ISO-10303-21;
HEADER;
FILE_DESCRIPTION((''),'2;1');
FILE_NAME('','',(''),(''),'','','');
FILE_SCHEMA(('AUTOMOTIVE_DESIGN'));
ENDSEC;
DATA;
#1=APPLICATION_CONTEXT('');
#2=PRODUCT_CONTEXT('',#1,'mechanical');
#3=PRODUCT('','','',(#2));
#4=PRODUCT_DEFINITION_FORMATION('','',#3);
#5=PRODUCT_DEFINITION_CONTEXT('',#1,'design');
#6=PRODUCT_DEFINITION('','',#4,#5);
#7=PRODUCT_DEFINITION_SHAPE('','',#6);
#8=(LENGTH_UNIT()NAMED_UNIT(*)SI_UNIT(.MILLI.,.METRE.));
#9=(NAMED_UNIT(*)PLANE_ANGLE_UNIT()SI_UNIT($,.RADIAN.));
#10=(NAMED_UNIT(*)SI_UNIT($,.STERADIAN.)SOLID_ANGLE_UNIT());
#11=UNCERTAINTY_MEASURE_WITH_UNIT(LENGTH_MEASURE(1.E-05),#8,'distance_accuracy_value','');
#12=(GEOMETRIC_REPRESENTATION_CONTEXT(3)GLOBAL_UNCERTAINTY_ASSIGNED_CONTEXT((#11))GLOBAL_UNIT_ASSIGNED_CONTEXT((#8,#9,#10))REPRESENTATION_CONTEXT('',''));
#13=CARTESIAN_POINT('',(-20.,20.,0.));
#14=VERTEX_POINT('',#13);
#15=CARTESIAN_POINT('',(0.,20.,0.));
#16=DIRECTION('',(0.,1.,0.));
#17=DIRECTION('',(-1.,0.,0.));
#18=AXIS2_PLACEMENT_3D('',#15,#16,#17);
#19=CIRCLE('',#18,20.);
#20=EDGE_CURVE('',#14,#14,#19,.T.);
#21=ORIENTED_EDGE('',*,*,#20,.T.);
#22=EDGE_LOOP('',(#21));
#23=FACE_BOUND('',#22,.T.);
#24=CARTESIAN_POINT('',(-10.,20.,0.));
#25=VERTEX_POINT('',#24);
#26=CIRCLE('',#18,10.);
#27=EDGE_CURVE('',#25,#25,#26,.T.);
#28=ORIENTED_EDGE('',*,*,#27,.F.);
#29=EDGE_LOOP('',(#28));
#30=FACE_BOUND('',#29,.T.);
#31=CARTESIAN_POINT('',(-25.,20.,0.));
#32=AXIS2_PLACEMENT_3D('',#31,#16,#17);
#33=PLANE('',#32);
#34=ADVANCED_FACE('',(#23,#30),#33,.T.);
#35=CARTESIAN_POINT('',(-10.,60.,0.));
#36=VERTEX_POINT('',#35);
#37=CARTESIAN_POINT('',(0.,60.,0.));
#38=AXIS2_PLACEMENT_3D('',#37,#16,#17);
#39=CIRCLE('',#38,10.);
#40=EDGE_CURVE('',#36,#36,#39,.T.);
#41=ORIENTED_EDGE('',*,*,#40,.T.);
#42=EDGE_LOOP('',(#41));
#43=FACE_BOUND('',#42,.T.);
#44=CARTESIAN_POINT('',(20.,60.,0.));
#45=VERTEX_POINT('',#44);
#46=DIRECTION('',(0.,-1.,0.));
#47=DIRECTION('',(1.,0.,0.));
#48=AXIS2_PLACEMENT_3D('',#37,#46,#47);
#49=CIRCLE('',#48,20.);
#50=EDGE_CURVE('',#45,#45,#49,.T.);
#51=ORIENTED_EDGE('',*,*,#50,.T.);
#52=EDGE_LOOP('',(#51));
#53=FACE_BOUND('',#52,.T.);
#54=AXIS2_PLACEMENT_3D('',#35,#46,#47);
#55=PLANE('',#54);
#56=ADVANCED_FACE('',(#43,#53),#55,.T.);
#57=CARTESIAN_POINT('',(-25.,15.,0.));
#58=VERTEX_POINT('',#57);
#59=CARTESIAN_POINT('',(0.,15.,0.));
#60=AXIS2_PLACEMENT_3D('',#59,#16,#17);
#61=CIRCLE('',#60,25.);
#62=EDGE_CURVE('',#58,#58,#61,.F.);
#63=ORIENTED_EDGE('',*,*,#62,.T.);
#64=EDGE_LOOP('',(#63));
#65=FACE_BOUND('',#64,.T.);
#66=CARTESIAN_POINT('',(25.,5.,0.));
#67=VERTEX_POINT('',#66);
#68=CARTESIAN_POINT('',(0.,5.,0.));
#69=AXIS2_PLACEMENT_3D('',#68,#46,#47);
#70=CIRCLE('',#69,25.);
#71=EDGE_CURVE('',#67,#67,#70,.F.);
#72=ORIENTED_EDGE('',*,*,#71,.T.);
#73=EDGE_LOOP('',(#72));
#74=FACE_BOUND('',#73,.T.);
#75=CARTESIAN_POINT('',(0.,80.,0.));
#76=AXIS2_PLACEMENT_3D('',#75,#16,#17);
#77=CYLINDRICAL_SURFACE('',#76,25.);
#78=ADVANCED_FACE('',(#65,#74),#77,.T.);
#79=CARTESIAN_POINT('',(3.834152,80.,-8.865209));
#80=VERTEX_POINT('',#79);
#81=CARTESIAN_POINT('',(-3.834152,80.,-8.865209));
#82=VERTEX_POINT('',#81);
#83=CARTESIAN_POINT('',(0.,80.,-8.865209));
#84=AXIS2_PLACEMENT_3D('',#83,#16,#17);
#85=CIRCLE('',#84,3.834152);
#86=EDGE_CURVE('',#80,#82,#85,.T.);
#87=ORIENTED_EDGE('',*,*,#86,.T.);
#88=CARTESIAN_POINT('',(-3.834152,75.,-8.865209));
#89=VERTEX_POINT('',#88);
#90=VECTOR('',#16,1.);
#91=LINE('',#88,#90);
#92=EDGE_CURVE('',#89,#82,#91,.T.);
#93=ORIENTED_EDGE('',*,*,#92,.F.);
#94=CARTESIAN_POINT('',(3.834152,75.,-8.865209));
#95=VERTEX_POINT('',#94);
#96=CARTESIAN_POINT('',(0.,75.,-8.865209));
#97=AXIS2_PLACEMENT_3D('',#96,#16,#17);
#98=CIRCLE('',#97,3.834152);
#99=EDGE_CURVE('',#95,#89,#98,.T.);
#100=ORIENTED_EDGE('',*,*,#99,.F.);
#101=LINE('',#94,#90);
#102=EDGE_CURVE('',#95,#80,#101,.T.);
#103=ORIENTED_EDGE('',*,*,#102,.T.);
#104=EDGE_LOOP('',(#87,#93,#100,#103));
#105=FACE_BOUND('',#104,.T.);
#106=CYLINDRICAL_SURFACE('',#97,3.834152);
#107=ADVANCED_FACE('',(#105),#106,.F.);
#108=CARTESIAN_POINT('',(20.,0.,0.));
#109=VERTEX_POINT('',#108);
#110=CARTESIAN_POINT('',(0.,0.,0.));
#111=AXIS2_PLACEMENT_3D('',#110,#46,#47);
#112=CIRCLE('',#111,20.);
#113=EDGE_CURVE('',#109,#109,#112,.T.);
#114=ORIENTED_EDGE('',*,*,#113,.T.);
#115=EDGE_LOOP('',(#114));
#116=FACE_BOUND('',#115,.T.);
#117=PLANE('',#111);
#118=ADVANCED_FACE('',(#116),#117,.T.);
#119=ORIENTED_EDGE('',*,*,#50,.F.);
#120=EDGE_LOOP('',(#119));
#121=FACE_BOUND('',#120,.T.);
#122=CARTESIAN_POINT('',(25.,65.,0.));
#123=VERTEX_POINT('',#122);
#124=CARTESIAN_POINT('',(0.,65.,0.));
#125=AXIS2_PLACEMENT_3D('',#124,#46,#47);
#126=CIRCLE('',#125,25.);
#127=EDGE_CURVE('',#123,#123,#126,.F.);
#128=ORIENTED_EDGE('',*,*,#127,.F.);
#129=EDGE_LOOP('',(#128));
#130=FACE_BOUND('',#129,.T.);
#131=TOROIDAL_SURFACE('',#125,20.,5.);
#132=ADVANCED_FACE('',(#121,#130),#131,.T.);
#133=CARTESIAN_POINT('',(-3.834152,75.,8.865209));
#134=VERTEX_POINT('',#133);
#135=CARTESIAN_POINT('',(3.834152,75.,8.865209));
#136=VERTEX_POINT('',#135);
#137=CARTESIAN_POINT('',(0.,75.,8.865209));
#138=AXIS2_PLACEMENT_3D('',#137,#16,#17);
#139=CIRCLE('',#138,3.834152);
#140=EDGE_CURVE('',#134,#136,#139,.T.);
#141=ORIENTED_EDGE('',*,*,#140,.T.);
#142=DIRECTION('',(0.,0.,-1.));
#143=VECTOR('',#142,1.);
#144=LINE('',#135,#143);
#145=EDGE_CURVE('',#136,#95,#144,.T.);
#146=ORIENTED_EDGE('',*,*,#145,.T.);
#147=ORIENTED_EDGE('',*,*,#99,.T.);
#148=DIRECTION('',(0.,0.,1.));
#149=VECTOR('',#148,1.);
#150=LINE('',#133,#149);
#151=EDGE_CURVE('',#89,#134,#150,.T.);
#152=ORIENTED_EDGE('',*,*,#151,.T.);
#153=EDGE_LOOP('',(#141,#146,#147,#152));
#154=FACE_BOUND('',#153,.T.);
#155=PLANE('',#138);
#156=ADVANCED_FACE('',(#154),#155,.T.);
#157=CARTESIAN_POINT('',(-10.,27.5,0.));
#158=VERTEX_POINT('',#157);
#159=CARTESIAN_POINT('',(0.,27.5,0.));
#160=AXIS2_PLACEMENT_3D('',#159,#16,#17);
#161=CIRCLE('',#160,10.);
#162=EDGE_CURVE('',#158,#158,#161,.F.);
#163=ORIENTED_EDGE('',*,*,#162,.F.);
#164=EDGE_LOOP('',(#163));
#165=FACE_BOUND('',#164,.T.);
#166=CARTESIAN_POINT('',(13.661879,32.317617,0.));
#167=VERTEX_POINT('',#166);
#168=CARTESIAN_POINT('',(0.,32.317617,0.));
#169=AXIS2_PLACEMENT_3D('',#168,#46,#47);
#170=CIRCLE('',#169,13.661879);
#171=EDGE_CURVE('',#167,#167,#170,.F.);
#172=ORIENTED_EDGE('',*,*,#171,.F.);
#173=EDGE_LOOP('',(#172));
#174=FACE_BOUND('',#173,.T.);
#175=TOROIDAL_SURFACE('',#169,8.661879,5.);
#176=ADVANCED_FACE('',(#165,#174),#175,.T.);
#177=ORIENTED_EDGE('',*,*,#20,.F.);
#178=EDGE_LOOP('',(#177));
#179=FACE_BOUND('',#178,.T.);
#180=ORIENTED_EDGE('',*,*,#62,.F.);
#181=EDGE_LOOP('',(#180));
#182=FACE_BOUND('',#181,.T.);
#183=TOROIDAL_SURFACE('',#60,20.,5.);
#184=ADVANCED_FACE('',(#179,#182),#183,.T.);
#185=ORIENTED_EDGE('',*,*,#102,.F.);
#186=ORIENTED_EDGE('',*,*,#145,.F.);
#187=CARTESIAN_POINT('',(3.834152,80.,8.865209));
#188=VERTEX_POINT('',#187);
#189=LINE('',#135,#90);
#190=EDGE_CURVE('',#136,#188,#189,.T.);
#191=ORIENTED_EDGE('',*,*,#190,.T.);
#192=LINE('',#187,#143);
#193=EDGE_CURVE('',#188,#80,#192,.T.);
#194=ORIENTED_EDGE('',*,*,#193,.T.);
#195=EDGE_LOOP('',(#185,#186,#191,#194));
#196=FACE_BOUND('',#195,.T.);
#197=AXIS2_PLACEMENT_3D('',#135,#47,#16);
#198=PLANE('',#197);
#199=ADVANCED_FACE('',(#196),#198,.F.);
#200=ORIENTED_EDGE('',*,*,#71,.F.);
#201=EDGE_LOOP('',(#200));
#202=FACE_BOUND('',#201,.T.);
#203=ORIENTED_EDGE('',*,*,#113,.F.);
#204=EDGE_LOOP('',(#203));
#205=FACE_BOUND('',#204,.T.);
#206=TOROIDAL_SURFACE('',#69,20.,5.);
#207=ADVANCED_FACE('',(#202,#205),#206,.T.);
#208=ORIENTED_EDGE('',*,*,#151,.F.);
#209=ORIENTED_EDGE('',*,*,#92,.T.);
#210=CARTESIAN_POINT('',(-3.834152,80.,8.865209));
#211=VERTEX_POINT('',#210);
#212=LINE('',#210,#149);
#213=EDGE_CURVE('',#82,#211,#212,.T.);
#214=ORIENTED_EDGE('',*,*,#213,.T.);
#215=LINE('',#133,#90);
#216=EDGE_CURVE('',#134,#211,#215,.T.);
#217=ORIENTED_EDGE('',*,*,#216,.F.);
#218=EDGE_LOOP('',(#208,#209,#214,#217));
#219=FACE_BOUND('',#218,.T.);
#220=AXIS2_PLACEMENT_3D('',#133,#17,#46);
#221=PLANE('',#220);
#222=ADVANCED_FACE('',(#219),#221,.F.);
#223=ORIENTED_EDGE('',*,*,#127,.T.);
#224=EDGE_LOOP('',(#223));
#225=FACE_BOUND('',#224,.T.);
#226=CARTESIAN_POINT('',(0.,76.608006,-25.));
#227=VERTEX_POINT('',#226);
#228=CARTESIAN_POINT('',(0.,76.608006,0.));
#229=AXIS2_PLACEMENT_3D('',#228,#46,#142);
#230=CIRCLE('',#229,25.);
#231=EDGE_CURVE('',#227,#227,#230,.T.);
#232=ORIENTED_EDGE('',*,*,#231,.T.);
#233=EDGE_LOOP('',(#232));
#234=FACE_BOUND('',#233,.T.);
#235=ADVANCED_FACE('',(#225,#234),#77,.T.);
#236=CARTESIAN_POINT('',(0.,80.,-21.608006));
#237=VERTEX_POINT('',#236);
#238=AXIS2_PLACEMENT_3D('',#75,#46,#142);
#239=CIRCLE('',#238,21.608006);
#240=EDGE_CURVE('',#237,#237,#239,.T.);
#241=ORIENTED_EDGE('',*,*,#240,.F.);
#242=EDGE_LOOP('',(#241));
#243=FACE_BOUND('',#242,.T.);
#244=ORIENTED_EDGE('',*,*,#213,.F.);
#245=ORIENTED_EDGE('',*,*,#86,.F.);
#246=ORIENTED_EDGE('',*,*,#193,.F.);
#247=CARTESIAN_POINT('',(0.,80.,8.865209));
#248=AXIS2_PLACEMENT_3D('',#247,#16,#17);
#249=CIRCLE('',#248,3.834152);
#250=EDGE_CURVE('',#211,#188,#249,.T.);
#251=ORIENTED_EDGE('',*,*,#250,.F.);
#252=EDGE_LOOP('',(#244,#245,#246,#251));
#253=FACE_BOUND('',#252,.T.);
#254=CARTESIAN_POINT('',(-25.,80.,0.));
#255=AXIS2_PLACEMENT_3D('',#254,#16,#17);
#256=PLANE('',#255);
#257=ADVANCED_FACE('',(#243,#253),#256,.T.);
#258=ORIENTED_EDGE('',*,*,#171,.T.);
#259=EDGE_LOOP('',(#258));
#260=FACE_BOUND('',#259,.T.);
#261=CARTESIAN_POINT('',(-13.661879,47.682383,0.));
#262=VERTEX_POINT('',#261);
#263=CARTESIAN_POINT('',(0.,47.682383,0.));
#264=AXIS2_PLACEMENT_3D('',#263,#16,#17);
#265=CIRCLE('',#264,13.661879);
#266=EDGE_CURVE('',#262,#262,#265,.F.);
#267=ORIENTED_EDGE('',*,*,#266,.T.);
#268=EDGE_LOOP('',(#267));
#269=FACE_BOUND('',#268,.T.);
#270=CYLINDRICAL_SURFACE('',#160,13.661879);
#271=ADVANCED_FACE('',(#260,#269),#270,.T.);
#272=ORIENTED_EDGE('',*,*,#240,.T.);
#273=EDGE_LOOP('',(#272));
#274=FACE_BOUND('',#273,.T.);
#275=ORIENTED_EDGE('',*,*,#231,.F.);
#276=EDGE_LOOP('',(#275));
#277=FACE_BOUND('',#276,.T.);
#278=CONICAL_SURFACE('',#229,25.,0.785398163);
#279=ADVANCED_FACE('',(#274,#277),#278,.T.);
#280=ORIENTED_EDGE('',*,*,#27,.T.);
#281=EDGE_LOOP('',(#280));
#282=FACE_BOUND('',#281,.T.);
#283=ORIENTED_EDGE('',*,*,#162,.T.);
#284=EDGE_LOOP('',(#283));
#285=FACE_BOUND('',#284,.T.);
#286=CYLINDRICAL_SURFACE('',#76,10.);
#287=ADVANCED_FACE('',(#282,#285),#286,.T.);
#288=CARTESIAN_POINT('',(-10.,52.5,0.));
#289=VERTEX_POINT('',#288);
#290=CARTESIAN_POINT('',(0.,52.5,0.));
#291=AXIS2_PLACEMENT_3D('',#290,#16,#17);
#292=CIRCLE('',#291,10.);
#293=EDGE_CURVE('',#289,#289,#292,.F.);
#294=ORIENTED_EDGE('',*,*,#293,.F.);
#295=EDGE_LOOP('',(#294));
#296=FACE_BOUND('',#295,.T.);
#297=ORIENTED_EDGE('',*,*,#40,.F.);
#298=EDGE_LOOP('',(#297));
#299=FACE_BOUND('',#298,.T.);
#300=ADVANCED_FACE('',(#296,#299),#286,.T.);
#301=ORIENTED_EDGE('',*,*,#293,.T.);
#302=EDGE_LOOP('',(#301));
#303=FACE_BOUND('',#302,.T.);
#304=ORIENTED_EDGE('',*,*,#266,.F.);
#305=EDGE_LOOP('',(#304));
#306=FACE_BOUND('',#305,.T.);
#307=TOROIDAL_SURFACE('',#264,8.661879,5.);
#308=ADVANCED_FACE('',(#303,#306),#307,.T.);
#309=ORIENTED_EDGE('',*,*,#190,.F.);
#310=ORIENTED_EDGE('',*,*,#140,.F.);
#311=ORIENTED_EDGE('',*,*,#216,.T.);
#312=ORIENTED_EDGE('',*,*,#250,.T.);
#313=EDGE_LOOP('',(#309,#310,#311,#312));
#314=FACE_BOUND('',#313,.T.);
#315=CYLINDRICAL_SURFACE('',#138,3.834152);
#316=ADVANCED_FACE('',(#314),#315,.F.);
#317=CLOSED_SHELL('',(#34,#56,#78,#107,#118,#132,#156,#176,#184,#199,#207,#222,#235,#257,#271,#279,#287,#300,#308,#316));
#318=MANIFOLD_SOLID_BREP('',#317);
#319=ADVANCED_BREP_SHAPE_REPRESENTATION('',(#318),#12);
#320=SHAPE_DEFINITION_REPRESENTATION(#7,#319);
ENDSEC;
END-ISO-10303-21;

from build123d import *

# Parameters (mm, degrees)
SKETCH_3_R          = 13.661879352
EXTRUDE_1_DEPTH     = 12.5
CUT_EXTRUDE_1_DEPTH = 5
FILLET_1_R          = 5


with BuildPart() as part:
    # 草图2 → 旋转1 (revolve)
    with BuildSketch(Plane.XY):
        Polygon((0, 0), (-25, 0), (-25, 20), (-10, 20), (-10, 60), (-25, 60), (-25, 80), (0, 80), align=None)
    revolve(axis=Axis((0, 80, 0), (0, -1, 0)))

    # 草图3 → 凸台-拉伸1 (add, symmetric)
    with BuildSketch(Plane(origin=(0, 40, 0), x_dir=(1, 0, 0), z_dir=(0, 1, 0))):
        with Locations(Location((0, 0, 0), (0, 0, 180))):
            Circle(SKETCH_3_R)
    extrude(amount=EXTRUDE_1_DEPTH, both=True)

    # 草图4 → 切除-拉伸1 (cut)
    with BuildSketch(Plane(origin=(0, 80, 0), x_dir=(1, 0, 0), z_dir=(0, 1, 0))):
        with BuildLine():
            Line((-3.834152171, -8.865208988), (-3.834152171, 8.865208988))
            ThreePointArc((-3.834152171, 8.865208988), (0, 12.699361159), (3.834152171, 8.865208988))
            Line((3.834152171, 8.865208988), (3.834152171, -8.865208988))
            ThreePointArc((3.834152171, -8.865208988), (0, -12.699361159), (-3.834152171, -8.865208988))
        make_face()
    extrude(amount=-CUT_EXTRUDE_1_DEPTH, mode=Mode.SUBTRACT)

    # 草图5 → 切除-旋转1 (revolve, cut)
    with BuildSketch(Plane(origin=(0, 0, 0), x_dir=(0, 0, -1), z_dir=(1, 0, 0)), mode=Mode.PRIVATE) as cut_revolve_1_sk:
        Polygon((-25, 80), (-25, 76.608006346), (-21.608006346, 80), align=None)
    revolve(cut_revolve_1_sk.sketch.rotate(Axis((0, 0, 0), (0, 1, 0)), 270), axis=Axis((0, 0, 0), (0, 1, 0)), mode=Mode.SUBTRACT)

    # 圆角1
    # the kernel refuses this fillet: 5 mm, written as the material it takes off along each edge
    with BuildSketch(Plane(origin=(0, 27.5, 0), x_dir=(-1, 0, 0), z_dir=(0, 0, -1))) as fillet_1_piece_1:
        with BuildLine():
            CenterArc((8.661879352, 4.817616956), FILLET_1_R, 285.5229375, 74.4770625)
            Line((13.661879352, 4.817616956), (13.761879352, 4.817616956))
            Line((13.761879352, 4.817616956), (13.761879352, 0))
            Line((13.761879352, 0), (13.661879352, -0.1))
            ThreePointArc((13.661879352, -0.1), (11.830939676, -0.1), (10.026762413, -0.096352339))
            Line((10.026762413, -0.096352339), (10, 0))
        make_face()
    revolve(axis=Axis((0, 27.5, 0), (0, 1, 0)), mode=Mode.SUBTRACT)
    with BuildSketch(Plane(origin=(0, 52.5, 0), x_dir=(-1, 0, 0), z_dir=(0, 0, -1))) as fillet_1_piece_2:
        with BuildLine():
            CenterArc((8.661879352, -4.817616956), FILLET_1_R, 0, 74.4770625)
            Line((10, 0), (10.026762413, 0.096352339))
            ThreePointArc((10.026762413, 0.096352339), (11.830939676, 0.1), (13.661879352, 0.1))
            Line((13.661879352, 0.1), (13.761879352, 0))
            Line((13.761879352, 0), (13.761879352, -4.817616956))
            Line((13.761879352, -4.817616956), (13.661879352, -4.817616956))
        make_face()
    revolve(axis=Axis((0, 52.5, 0), (0, 1, 0)), mode=Mode.SUBTRACT)
    with BuildSketch(Plane(origin=(0, 60, 0), x_dir=(-1, 0, 0), z_dir=(0, 0, 1))) as fillet_1_piece_3:
        with BuildLine():
            CenterArc((25 - FILLET_1_R, -FILLET_1_R), FILLET_1_R, 0, 90)
            Line((25, -FILLET_1_R), (25 + FILLET_1_R * 0.02, -FILLET_1_R))
            Line((25 + FILLET_1_R * 0.02, -FILLET_1_R), (25 + FILLET_1_R * 0.02, FILLET_1_R * 0.02))
            Line((25 + FILLET_1_R * 0.02, FILLET_1_R * 0.02), (25 - FILLET_1_R, FILLET_1_R * 0.02))
            Line((25 - FILLET_1_R, FILLET_1_R * 0.02), (25 - FILLET_1_R, 0))
        make_face()
    revolve(axis=Axis((0, 60, 0), (0, -1, 0)), mode=Mode.SUBTRACT)
    with BuildSketch(Plane(origin=(0, 20, 0), x_dir=(-1, 0, 0), z_dir=(0, 0, 1))) as fillet_1_piece_4:
        with BuildLine():
            CenterArc((25 - FILLET_1_R, FILLET_1_R), FILLET_1_R, 270, 90)
            Line((25 - FILLET_1_R, 0), (25 - FILLET_1_R, -FILLET_1_R * 0.02))
            Line((25 - FILLET_1_R, -FILLET_1_R * 0.02), (25 + FILLET_1_R * 0.02, -FILLET_1_R * 0.02))
            Line((25 + FILLET_1_R * 0.02, -FILLET_1_R * 0.02), (25 + FILLET_1_R * 0.02, FILLET_1_R))
            Line((25 + FILLET_1_R * 0.02, FILLET_1_R), (25, FILLET_1_R))
        make_face()
    revolve(axis=Axis((0, 20, 0), (0, -1, 0)), mode=Mode.SUBTRACT)
    with BuildSketch(Plane(origin=(0, 0, 0), x_dir=(-1, 0, 0), z_dir=(0, 0, 1))) as fillet_1_piece_5:
        with BuildLine():
            CenterArc((25 - FILLET_1_R, -FILLET_1_R), FILLET_1_R, 0, 90)
            Line((25, -FILLET_1_R), (25 + FILLET_1_R * 0.02, -FILLET_1_R))
            Line((25 + FILLET_1_R * 0.02, -FILLET_1_R), (25 + FILLET_1_R * 0.02, FILLET_1_R * 0.02))
            Line((25 + FILLET_1_R * 0.02, FILLET_1_R * 0.02), (25 - FILLET_1_R, FILLET_1_R * 0.02))
            Line((25 - FILLET_1_R, FILLET_1_R * 0.02), (25 - FILLET_1_R, 0))
        make_face()
    revolve(axis=Axis((0, 0, 0), (0, -1, 0)), mode=Mode.SUBTRACT)


solid = part.part
